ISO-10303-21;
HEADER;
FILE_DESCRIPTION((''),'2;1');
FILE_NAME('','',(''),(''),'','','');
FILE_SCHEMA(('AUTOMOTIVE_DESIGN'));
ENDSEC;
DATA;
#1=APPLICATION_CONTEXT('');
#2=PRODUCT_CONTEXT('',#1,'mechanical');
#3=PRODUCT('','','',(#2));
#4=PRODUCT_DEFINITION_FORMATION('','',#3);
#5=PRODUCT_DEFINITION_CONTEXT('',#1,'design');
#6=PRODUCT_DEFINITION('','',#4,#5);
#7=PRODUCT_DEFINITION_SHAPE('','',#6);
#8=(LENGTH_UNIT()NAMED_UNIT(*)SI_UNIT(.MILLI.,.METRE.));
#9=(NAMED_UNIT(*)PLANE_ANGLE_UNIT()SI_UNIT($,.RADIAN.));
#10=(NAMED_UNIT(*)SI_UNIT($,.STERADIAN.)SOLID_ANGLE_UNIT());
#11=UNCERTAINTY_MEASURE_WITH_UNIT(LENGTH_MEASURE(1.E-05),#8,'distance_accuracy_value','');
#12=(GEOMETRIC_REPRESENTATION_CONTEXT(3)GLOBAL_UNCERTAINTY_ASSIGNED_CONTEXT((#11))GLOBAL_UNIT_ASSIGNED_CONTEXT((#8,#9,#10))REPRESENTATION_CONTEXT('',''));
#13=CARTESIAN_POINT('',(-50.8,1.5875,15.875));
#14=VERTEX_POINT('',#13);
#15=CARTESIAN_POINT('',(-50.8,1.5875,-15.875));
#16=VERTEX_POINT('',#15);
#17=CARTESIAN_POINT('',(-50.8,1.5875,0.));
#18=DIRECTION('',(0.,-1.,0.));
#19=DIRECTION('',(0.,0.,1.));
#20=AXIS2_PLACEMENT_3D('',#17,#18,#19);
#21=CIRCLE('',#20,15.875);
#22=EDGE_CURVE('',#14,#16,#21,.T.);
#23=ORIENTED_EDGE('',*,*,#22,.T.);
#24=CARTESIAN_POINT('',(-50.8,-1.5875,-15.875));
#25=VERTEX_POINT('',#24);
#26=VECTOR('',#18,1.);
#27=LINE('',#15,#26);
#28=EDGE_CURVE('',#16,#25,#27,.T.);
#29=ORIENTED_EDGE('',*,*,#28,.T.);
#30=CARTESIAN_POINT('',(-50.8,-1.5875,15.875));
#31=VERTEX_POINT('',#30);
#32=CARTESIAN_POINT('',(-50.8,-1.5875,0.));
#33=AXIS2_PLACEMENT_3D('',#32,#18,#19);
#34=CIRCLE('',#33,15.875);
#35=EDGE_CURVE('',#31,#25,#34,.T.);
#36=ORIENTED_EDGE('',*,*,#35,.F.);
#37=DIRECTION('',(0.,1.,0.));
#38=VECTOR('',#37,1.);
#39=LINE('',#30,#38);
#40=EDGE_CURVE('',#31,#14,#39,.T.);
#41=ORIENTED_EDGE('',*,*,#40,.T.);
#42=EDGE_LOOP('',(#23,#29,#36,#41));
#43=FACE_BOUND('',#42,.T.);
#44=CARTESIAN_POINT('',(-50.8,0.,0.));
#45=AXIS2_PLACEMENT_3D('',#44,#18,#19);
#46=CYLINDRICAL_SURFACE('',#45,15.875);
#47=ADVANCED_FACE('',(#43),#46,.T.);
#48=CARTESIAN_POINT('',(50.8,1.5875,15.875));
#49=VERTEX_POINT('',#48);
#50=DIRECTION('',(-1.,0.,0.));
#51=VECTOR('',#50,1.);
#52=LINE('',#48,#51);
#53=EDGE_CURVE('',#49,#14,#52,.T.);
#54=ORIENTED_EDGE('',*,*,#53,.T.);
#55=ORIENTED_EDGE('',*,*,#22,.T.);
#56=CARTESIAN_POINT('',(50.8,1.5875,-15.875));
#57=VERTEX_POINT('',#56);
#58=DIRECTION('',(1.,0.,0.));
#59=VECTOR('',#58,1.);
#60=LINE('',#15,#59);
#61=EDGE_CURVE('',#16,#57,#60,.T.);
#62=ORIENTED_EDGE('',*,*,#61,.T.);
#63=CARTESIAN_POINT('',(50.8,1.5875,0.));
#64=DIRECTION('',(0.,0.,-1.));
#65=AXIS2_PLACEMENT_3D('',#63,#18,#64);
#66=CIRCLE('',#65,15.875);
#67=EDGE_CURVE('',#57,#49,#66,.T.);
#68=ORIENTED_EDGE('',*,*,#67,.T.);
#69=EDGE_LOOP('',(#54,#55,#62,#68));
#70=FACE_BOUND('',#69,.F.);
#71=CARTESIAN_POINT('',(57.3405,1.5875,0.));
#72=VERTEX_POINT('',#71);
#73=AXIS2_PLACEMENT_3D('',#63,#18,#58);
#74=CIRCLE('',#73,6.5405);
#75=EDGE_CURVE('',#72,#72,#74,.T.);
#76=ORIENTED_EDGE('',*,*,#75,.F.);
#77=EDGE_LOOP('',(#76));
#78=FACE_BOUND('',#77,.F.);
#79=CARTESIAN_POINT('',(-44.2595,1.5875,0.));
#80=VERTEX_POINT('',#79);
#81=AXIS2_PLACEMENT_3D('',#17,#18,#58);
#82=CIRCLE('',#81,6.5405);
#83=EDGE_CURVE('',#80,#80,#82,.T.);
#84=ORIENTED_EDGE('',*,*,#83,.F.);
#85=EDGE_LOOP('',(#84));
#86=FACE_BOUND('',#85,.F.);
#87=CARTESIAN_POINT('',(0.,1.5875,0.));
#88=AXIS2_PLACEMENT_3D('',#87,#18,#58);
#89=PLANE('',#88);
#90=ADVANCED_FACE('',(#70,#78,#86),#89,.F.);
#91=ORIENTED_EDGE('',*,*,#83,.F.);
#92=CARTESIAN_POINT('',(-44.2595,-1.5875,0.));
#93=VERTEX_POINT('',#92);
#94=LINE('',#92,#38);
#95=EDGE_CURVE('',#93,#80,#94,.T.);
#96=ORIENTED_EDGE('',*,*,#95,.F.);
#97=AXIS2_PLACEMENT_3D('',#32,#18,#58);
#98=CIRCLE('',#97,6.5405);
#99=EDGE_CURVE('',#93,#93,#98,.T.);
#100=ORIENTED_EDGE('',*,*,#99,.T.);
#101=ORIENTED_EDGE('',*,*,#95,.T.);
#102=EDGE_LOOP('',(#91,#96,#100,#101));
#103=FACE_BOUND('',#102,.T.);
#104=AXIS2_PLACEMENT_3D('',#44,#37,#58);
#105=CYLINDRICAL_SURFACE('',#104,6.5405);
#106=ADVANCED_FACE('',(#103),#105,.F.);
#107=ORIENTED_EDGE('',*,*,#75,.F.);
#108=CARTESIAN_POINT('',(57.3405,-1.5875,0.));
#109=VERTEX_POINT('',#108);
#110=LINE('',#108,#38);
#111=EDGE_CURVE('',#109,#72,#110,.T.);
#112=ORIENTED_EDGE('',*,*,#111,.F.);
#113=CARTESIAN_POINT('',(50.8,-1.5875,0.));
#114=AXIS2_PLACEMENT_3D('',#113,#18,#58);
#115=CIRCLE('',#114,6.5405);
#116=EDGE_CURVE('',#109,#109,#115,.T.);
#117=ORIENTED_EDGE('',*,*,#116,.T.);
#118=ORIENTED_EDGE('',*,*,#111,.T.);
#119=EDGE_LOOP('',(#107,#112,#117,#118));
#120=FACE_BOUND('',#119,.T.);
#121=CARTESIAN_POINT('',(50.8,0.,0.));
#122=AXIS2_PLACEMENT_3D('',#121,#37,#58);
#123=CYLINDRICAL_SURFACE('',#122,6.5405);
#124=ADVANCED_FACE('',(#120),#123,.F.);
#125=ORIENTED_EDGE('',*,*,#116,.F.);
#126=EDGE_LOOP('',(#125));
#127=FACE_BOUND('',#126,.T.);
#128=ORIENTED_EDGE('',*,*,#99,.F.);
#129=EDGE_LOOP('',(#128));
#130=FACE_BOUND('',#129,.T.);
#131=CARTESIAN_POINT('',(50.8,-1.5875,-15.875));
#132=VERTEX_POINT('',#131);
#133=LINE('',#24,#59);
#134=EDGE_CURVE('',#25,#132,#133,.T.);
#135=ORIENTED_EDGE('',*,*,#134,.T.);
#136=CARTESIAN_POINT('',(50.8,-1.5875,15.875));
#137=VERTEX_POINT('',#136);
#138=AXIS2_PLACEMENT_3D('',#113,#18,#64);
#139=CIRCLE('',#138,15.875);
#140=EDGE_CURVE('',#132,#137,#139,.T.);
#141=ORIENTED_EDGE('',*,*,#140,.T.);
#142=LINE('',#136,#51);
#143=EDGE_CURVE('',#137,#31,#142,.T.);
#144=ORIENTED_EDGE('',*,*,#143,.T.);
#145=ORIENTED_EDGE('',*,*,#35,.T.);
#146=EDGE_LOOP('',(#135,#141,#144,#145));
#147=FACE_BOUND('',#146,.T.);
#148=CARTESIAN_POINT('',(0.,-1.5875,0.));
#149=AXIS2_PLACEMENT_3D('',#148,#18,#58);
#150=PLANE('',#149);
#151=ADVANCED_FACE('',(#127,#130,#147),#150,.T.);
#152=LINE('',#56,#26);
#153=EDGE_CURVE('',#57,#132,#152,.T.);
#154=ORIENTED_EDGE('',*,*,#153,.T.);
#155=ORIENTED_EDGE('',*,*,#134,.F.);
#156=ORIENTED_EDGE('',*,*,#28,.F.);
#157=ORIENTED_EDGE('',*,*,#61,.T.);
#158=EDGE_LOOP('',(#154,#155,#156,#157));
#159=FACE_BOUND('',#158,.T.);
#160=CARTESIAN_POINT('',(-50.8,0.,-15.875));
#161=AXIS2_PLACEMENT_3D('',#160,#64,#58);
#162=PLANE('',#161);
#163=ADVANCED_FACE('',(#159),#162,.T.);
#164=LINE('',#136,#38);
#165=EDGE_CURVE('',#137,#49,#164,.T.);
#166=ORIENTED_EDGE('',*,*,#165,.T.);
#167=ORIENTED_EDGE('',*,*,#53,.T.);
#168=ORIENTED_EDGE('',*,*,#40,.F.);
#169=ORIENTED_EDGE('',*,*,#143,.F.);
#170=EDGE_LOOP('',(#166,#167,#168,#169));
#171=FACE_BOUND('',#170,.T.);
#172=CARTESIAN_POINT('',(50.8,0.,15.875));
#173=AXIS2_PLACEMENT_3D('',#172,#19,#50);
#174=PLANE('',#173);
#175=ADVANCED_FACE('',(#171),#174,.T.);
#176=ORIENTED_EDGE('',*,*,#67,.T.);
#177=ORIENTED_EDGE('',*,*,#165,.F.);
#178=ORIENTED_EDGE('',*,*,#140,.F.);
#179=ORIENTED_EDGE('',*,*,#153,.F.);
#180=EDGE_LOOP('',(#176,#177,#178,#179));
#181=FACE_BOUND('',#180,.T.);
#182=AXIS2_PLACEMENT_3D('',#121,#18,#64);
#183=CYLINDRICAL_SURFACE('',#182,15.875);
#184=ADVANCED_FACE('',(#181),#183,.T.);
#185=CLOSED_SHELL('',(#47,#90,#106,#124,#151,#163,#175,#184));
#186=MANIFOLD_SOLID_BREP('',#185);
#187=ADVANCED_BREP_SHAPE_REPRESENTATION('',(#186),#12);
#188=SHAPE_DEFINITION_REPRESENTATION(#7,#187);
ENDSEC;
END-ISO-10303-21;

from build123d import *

# Parameters (mm, degrees)
F0_R     = 6.5405
F1_DEPTH = 1.5875


# Not quite as in the source:
# - a length typed as a fraction of an inch, garbled in the dataset ("3 / 203.2 mm" for 3/8 in), is restored


with BuildPart() as f1:
    # F0 (on Front) → F1 (new body, symmetric)
    with BuildSketch(Plane.XZ):
        with BuildLine():
            Line((0, 15.875), (-50.8, 15.875))
            ThreePointArc((-50.8, 15.875), (-66.675, 0), (-50.8, -15.875))
            Line((-50.8, -15.875), (0, -15.875))
            Line((0, -15.875), (50.8, -15.875))
            ThreePointArc((50.8, -15.875), (66.675, 0), (50.8, 15.875))
            Line((50.8, 15.875), (0, 15.875))
        make_face()
        with Locations((-50.8, 0)):
            Circle(F0_R, mode=Mode.SUBTRACT)
        with Locations((50.8, 0)):
            Circle(F0_R, mode=Mode.SUBTRACT)
    extrude(amount=F1_DEPTH, both=True)


solid = f1.part
